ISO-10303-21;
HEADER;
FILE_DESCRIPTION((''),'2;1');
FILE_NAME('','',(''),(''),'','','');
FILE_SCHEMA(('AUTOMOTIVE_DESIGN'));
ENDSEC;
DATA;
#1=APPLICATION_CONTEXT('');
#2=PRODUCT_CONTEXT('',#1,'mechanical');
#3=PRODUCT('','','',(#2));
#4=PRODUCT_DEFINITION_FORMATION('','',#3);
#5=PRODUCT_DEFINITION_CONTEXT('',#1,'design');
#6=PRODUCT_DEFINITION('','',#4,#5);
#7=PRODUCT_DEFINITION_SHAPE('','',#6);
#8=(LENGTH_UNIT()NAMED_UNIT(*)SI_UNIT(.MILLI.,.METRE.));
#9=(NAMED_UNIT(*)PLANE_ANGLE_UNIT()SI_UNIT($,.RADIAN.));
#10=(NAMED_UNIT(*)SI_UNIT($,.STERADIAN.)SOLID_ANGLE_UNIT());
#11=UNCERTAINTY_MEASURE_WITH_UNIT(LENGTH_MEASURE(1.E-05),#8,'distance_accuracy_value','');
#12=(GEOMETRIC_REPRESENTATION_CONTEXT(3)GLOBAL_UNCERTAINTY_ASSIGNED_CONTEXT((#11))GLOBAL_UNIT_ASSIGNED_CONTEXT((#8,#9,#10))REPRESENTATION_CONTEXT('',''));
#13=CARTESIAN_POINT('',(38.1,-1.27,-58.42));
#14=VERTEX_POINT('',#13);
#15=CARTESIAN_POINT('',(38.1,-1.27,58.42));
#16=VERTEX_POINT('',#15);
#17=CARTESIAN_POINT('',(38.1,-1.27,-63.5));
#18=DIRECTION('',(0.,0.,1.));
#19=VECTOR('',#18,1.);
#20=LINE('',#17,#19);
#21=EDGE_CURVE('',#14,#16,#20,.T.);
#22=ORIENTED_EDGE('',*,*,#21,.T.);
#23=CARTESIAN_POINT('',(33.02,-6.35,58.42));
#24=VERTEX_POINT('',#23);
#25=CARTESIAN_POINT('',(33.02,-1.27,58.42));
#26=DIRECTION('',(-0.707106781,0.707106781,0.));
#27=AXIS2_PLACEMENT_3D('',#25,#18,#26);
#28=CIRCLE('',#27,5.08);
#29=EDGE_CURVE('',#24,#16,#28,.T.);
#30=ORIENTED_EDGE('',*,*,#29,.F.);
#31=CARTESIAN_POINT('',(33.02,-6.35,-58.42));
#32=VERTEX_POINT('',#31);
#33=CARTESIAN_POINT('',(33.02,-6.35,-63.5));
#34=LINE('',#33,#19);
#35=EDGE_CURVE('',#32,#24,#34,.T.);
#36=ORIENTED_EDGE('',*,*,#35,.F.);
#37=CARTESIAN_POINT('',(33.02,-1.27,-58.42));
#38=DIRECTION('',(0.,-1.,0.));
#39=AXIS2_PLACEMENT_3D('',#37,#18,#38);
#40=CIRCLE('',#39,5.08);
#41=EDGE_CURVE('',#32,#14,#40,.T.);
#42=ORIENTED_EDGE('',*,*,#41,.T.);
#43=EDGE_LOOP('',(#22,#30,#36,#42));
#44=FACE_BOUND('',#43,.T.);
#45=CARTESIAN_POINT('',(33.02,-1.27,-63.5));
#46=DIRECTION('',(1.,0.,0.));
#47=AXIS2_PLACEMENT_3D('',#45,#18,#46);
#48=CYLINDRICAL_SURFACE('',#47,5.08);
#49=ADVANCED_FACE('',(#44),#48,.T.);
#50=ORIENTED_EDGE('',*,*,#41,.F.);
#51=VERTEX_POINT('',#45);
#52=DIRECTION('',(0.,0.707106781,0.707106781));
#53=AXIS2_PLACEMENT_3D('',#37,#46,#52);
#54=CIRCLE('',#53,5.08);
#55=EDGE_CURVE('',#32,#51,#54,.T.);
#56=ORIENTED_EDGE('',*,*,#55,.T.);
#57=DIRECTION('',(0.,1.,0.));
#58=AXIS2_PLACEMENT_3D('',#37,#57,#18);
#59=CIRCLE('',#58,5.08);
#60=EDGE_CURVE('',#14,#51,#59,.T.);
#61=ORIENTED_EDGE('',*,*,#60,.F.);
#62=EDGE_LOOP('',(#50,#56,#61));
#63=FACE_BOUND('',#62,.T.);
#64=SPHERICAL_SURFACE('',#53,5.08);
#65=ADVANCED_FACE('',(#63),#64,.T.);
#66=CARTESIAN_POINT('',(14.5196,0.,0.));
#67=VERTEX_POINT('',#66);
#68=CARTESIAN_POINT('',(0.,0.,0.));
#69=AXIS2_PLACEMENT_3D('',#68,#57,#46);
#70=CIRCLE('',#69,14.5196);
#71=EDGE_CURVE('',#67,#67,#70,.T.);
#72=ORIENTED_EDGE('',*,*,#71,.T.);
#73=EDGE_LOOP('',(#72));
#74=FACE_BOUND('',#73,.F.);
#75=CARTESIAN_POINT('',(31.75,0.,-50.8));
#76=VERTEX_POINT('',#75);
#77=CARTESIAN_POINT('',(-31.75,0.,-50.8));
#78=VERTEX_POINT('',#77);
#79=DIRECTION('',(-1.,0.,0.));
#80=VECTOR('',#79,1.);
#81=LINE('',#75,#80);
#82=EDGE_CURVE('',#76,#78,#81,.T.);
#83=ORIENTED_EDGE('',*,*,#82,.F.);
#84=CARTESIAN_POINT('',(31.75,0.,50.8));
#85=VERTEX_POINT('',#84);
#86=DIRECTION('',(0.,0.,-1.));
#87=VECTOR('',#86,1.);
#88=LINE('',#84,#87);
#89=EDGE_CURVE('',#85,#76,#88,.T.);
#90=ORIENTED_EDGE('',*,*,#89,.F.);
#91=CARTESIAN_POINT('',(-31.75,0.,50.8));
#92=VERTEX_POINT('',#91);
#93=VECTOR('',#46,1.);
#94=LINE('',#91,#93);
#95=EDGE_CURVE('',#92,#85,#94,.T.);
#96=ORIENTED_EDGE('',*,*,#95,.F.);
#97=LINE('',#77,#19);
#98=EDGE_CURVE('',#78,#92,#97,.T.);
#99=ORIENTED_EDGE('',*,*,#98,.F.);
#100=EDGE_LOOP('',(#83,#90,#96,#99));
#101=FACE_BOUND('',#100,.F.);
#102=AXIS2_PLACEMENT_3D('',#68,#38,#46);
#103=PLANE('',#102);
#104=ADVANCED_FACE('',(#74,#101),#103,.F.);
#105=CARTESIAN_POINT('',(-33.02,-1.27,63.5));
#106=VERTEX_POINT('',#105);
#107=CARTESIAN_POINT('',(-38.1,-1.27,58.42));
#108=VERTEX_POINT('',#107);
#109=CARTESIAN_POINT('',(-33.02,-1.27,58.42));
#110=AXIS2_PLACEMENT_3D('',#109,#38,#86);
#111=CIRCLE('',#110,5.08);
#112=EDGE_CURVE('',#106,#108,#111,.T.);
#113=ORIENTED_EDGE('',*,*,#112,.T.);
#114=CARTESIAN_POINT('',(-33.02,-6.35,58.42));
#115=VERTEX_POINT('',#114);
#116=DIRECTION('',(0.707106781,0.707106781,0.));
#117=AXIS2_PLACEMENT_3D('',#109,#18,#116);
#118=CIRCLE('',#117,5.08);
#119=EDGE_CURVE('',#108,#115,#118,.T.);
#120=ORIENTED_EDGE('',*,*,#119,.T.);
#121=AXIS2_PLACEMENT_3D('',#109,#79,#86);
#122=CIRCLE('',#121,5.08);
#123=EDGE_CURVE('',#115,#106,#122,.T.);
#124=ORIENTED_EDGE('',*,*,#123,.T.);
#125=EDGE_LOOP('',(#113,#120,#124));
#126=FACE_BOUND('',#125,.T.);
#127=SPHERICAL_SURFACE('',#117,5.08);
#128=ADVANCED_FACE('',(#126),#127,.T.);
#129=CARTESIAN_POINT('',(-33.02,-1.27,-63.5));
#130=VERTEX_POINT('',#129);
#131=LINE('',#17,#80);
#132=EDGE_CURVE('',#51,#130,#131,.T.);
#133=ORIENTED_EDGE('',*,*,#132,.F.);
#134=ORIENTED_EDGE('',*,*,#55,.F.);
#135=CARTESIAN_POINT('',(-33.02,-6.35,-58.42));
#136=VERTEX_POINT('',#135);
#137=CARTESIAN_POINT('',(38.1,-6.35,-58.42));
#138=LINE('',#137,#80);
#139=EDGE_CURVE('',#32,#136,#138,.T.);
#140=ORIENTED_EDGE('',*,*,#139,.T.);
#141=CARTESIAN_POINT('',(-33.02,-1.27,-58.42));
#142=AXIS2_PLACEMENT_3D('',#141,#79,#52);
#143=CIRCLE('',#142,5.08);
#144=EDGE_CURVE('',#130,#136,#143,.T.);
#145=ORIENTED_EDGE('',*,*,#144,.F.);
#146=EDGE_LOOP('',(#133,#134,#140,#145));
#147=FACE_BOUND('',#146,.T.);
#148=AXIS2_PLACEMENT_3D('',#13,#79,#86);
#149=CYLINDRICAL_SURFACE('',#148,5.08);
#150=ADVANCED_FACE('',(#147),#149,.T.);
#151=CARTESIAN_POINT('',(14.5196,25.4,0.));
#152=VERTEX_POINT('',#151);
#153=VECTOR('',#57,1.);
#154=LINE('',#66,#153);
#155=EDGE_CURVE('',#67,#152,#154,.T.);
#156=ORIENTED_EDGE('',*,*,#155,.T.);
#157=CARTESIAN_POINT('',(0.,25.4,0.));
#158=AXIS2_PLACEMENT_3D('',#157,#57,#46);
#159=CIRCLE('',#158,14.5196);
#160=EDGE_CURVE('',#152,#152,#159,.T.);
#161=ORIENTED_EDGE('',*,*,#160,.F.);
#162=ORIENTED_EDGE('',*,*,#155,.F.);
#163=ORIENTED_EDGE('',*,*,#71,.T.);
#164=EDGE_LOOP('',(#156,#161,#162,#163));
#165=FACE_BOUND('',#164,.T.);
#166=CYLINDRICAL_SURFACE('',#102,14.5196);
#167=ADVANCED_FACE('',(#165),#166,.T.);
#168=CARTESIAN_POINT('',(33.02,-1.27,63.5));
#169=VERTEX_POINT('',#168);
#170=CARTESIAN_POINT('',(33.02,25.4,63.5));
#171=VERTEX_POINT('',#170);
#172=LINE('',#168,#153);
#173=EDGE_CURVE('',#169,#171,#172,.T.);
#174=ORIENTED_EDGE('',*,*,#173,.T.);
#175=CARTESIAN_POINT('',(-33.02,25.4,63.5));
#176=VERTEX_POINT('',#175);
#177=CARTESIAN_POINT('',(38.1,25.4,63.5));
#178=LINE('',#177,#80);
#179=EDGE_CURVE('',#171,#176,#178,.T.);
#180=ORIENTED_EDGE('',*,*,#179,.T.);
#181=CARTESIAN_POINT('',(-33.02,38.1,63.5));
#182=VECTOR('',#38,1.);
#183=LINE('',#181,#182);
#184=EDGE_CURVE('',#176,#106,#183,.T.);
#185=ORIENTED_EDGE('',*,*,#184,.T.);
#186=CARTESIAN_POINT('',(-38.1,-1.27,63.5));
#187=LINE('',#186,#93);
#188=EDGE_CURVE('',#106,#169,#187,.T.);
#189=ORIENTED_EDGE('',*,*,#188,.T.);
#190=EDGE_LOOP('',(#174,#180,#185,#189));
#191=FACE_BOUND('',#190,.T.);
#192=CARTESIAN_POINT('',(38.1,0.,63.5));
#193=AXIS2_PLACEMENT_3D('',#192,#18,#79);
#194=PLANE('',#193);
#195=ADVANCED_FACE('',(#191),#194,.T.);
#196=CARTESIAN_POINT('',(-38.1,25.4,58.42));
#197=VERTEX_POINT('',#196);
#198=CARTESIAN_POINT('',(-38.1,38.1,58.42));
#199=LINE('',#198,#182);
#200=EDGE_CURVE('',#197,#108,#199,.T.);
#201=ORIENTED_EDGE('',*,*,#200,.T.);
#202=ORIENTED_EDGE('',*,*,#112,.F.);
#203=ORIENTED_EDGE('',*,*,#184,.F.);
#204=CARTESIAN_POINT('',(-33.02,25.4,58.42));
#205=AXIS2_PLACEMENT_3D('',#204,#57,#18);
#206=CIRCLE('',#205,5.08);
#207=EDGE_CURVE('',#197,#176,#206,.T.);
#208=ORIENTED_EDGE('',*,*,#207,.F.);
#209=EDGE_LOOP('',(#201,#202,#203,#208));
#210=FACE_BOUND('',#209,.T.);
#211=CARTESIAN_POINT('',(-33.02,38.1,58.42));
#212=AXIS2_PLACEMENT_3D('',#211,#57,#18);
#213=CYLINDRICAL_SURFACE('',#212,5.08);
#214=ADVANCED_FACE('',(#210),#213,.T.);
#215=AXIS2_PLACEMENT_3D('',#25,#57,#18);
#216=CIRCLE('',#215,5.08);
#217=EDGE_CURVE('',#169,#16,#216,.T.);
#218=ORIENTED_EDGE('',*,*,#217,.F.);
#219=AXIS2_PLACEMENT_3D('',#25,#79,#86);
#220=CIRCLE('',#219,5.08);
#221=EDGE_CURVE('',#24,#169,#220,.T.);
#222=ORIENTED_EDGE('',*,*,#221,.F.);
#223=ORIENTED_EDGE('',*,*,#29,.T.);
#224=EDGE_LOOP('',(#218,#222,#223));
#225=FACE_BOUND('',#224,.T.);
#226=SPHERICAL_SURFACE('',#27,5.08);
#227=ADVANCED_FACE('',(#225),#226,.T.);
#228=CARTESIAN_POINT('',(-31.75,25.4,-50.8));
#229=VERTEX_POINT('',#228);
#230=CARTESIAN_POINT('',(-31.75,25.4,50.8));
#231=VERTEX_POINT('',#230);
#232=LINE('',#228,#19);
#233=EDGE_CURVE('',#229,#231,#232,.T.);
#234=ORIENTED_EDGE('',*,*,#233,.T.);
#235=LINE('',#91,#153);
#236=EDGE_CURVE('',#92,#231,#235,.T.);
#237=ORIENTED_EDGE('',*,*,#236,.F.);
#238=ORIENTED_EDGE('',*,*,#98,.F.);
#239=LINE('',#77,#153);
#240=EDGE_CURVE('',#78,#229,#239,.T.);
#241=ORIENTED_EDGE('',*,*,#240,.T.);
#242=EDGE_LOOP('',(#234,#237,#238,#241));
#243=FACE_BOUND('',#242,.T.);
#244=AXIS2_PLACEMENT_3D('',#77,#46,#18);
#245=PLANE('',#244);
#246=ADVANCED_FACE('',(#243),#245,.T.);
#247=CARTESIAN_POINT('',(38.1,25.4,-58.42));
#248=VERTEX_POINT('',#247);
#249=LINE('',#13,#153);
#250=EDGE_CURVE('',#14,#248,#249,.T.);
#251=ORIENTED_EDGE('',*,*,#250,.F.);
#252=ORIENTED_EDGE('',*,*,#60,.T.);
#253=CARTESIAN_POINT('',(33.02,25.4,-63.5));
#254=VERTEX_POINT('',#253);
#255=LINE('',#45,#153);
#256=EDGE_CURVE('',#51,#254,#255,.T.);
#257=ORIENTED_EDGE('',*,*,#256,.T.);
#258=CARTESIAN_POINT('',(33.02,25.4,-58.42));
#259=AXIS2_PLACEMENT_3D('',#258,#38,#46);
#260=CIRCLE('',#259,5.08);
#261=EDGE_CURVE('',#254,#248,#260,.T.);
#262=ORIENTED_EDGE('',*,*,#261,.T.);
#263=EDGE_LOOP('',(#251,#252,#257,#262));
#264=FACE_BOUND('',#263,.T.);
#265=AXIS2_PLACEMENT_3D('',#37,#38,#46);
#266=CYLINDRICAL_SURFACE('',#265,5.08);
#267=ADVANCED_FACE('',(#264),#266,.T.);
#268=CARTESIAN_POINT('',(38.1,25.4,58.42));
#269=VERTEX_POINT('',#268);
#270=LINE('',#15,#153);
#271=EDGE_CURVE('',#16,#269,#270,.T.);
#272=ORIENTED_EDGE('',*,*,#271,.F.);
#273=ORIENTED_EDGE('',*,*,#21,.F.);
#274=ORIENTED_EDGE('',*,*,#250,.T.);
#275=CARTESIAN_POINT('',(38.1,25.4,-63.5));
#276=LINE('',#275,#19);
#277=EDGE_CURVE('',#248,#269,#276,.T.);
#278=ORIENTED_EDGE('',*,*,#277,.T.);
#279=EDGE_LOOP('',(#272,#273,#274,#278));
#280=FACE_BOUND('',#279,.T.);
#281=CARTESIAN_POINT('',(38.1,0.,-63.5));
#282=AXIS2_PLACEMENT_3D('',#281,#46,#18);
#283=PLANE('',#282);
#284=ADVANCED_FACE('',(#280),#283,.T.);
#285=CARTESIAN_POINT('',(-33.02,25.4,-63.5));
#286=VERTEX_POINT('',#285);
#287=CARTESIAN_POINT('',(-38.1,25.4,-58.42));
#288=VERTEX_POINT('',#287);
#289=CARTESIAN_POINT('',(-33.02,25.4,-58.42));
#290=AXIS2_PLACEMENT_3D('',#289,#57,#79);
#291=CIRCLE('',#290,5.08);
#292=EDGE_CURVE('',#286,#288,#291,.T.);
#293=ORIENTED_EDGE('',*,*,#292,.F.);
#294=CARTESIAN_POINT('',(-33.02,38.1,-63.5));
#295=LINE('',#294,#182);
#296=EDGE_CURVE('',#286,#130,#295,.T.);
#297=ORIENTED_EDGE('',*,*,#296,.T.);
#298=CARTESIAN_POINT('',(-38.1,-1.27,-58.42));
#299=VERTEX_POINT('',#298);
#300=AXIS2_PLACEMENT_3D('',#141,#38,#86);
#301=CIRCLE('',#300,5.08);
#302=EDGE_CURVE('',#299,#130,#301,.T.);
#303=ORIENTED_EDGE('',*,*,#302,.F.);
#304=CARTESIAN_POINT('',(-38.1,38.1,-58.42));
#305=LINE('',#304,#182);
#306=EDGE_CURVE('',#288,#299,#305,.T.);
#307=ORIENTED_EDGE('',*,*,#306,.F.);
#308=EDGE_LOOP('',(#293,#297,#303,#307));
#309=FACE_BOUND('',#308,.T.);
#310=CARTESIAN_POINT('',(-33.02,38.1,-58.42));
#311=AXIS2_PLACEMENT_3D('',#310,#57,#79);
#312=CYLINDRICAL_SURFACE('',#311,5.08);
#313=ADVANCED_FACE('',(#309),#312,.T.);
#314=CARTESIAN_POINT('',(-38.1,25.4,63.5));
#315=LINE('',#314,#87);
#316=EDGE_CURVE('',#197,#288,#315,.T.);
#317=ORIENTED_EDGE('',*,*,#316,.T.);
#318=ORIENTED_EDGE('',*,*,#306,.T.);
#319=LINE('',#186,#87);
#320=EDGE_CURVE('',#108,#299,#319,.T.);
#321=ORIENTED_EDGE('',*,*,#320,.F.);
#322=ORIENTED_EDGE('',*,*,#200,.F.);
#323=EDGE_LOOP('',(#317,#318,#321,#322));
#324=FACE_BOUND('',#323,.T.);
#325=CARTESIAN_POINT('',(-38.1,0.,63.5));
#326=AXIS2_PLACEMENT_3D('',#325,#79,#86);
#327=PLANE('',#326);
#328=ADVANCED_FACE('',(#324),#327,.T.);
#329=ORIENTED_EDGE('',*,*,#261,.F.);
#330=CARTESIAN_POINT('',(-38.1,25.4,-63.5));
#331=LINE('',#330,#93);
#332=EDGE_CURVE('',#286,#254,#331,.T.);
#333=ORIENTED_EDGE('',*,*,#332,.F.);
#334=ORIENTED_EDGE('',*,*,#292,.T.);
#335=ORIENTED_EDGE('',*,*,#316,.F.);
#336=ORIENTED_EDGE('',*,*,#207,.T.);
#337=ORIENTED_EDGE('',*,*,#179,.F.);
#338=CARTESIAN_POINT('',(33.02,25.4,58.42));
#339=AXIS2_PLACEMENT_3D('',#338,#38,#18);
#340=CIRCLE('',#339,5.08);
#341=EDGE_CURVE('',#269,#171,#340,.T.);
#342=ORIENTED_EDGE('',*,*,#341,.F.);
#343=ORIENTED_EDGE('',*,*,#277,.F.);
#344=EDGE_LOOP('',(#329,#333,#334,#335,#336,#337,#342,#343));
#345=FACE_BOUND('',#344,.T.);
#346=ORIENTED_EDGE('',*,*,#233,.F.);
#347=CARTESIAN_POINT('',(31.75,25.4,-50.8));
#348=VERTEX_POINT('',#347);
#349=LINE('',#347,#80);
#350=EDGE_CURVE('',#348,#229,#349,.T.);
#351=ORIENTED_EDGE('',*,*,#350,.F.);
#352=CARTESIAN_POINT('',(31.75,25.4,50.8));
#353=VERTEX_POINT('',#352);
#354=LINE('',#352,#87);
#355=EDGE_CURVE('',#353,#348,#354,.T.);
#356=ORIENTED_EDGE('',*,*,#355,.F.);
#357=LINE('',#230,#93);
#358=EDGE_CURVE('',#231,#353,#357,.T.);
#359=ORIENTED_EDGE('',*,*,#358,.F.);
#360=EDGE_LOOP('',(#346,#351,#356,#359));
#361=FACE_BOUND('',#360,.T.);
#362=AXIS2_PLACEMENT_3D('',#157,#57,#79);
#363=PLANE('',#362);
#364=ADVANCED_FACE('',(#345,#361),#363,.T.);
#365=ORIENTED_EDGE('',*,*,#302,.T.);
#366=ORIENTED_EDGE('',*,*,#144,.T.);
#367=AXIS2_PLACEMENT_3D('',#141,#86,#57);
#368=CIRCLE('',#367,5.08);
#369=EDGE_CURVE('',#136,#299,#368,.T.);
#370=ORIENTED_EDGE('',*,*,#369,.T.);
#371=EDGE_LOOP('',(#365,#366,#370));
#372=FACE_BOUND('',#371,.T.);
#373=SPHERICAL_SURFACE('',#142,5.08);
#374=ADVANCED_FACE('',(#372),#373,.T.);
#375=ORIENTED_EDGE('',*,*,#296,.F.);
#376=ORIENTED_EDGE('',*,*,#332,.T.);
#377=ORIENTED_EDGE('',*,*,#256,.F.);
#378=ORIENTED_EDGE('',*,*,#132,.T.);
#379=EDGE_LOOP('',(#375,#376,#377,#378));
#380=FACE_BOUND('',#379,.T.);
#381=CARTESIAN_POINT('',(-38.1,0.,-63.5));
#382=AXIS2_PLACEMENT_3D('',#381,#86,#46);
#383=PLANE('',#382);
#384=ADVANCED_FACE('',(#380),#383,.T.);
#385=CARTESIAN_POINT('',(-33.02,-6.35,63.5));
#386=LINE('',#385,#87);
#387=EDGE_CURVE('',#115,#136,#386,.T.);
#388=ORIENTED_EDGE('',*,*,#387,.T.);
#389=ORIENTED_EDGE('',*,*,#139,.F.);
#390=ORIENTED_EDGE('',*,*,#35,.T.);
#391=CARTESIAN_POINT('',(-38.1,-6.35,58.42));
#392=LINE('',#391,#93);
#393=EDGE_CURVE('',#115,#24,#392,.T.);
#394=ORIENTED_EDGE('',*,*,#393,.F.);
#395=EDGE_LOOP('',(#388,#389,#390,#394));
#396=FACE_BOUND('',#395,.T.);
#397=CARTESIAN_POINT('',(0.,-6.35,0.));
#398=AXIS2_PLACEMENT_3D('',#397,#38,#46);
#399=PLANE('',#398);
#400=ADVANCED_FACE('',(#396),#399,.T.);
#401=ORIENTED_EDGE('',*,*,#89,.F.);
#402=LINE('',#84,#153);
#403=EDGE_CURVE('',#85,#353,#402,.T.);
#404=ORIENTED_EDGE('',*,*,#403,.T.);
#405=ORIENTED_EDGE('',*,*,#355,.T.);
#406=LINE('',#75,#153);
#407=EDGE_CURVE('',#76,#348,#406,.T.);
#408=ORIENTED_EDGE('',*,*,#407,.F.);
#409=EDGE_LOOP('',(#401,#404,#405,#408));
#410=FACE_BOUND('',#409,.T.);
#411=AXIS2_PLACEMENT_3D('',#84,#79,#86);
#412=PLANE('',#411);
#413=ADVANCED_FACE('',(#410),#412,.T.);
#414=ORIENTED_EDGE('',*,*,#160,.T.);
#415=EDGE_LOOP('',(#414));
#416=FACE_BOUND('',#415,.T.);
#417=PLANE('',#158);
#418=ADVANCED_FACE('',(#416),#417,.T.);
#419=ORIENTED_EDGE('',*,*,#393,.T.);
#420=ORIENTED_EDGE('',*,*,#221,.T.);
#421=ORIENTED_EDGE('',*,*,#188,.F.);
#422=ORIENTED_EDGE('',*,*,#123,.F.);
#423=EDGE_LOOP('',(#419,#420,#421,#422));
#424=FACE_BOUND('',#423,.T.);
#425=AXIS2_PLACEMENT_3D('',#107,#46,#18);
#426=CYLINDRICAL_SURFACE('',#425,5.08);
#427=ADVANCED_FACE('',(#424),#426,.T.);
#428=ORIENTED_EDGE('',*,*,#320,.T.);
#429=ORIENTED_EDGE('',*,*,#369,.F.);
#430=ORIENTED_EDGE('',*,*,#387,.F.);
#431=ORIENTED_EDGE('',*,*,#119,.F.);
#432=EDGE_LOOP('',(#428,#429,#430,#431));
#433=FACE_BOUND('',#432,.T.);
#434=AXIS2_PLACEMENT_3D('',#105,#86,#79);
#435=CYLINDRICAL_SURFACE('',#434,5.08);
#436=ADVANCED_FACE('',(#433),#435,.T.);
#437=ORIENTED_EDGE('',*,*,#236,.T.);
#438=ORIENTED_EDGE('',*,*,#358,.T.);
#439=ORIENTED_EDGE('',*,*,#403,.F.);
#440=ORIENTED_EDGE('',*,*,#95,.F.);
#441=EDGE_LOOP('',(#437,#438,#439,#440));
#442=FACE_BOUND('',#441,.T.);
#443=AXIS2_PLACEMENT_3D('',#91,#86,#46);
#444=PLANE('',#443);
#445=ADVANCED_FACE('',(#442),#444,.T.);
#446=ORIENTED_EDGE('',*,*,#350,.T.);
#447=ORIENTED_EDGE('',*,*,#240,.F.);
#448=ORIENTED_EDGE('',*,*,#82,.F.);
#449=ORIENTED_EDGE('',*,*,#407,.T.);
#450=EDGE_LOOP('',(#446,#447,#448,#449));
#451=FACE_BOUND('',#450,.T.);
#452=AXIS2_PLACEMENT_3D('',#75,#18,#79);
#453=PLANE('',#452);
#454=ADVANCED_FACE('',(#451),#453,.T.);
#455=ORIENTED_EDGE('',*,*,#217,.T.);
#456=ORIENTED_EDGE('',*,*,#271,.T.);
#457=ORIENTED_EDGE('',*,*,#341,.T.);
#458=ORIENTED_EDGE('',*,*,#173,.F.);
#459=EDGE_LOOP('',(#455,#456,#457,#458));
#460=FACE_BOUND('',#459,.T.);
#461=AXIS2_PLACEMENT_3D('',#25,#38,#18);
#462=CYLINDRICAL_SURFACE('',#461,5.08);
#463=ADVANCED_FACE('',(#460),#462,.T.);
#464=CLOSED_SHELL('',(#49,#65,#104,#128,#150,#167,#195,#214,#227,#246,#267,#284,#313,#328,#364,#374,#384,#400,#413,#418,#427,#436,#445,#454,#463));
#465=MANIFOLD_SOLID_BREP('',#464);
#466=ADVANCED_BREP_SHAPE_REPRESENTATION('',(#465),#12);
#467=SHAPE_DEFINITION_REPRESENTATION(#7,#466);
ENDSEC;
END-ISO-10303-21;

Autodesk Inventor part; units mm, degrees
ref_plane "YZ Plane" through (0, 0, 0) normal (1, 0, 0) x (0, 1, 0)
ref_plane "XZ Plane" through (0, 0, 0) normal (0, 1, 0) x (-1, 0, 0)
ref_plane "XY Plane" through (0, 0, 0) normal (0, 0, 1) x (1, 0, 0)
sketch "Sketch1" plane through (0, 0, 0) normal (0, 1, 0) x (-1, 0, 0)
  line L0 (-38.1, 63.5) -> (38.1, 63.5)
  line L1 (38.1, 63.5) -> (38.1, -63.5)
  line L2 (38.1, -63.5) -> (-38.1, -63.5)
  line L3 (-38.1, -63.5) -> (-38.1, 63.5)
  line L4 (-38.1, 63.5) -> (38.1, -63.5) construction
  line L5 (38.1, 63.5) -> (-38.1, -63.5) construction
  line L6 (-31.75, -50.8) -> (31.75, -50.8)
  line L7 (31.75, -50.8) -> (31.75, 50.8)
  line L8 (31.75, 50.8) -> (-31.75, 50.8)
  line L9 (-31.75, 50.8) -> (-31.75, -50.8)
  line L10 (-31.75, -50.8) -> (31.75, 50.8) construction
  line L11 (31.75, -50.8) -> (-31.75, 50.8) construction
  point P0 (0, 0)
  dimension "d0" = 76.2
  dimension "d1" = 127
  dimension "d2" = 63.5
  dimension "d3" = 101.6
extrude "Extrusion1" add sketch "Sketch1" along normal blind 25.4
sketch "Sketch2" plane through (0, 0, 0) normal (0, -1, 0) x (1, 0, 0)
  line L0 (-38.1, 63.5) -> (38.1, 63.5) projected
  line L1 (38.1, -63.5) -> (-38.1, -63.5) projected
  line L2 (38.1, 63.5) -> (-38.1, 63.5)
  line L3 (-38.1, 63.5) -> (-38.1, -63.5)
  line L4 (-38.1, -63.5) -> (38.1, -63.5)
  line L5 (38.1, -63.5) -> (38.1, 63.5)
  point P0 (0, 0)
extrude "Extrusion2" add sketch "Sketch2" along normal blind 6.35
fillet "Fillet1" radius 5.08 4 edges at (38.1, -6.35, 0) (0, -6.35, -63.5) (-38.1, -6.35, 0) (0, -6.35, 63.5)
fillet "Fillet2" radius 5.08 8 edges at (36.6121, -4.8621, -62.0121) (38.1, 12.065, -63.5) (-36.6121, -4.8621, -62.0121) (-38.1, 12.065, -63.5) (36.6121, -4.8621, 62.0121) (38.1, 12.065, 63.5) (-36.6121, -4.8621, 62.0121) (-38.1, 12.065, 63.5)
sketch "Sketch3" plane through (0, 0, 0) normal (0, 1, 0) x (1, 0, 0)
  circle A0 centre (0, 0) radius 14.5196
extrude "Extrusion3" add sketch "Sketch3" along normal up to surface (25.4 mm away)
properties part number "TestPart"
